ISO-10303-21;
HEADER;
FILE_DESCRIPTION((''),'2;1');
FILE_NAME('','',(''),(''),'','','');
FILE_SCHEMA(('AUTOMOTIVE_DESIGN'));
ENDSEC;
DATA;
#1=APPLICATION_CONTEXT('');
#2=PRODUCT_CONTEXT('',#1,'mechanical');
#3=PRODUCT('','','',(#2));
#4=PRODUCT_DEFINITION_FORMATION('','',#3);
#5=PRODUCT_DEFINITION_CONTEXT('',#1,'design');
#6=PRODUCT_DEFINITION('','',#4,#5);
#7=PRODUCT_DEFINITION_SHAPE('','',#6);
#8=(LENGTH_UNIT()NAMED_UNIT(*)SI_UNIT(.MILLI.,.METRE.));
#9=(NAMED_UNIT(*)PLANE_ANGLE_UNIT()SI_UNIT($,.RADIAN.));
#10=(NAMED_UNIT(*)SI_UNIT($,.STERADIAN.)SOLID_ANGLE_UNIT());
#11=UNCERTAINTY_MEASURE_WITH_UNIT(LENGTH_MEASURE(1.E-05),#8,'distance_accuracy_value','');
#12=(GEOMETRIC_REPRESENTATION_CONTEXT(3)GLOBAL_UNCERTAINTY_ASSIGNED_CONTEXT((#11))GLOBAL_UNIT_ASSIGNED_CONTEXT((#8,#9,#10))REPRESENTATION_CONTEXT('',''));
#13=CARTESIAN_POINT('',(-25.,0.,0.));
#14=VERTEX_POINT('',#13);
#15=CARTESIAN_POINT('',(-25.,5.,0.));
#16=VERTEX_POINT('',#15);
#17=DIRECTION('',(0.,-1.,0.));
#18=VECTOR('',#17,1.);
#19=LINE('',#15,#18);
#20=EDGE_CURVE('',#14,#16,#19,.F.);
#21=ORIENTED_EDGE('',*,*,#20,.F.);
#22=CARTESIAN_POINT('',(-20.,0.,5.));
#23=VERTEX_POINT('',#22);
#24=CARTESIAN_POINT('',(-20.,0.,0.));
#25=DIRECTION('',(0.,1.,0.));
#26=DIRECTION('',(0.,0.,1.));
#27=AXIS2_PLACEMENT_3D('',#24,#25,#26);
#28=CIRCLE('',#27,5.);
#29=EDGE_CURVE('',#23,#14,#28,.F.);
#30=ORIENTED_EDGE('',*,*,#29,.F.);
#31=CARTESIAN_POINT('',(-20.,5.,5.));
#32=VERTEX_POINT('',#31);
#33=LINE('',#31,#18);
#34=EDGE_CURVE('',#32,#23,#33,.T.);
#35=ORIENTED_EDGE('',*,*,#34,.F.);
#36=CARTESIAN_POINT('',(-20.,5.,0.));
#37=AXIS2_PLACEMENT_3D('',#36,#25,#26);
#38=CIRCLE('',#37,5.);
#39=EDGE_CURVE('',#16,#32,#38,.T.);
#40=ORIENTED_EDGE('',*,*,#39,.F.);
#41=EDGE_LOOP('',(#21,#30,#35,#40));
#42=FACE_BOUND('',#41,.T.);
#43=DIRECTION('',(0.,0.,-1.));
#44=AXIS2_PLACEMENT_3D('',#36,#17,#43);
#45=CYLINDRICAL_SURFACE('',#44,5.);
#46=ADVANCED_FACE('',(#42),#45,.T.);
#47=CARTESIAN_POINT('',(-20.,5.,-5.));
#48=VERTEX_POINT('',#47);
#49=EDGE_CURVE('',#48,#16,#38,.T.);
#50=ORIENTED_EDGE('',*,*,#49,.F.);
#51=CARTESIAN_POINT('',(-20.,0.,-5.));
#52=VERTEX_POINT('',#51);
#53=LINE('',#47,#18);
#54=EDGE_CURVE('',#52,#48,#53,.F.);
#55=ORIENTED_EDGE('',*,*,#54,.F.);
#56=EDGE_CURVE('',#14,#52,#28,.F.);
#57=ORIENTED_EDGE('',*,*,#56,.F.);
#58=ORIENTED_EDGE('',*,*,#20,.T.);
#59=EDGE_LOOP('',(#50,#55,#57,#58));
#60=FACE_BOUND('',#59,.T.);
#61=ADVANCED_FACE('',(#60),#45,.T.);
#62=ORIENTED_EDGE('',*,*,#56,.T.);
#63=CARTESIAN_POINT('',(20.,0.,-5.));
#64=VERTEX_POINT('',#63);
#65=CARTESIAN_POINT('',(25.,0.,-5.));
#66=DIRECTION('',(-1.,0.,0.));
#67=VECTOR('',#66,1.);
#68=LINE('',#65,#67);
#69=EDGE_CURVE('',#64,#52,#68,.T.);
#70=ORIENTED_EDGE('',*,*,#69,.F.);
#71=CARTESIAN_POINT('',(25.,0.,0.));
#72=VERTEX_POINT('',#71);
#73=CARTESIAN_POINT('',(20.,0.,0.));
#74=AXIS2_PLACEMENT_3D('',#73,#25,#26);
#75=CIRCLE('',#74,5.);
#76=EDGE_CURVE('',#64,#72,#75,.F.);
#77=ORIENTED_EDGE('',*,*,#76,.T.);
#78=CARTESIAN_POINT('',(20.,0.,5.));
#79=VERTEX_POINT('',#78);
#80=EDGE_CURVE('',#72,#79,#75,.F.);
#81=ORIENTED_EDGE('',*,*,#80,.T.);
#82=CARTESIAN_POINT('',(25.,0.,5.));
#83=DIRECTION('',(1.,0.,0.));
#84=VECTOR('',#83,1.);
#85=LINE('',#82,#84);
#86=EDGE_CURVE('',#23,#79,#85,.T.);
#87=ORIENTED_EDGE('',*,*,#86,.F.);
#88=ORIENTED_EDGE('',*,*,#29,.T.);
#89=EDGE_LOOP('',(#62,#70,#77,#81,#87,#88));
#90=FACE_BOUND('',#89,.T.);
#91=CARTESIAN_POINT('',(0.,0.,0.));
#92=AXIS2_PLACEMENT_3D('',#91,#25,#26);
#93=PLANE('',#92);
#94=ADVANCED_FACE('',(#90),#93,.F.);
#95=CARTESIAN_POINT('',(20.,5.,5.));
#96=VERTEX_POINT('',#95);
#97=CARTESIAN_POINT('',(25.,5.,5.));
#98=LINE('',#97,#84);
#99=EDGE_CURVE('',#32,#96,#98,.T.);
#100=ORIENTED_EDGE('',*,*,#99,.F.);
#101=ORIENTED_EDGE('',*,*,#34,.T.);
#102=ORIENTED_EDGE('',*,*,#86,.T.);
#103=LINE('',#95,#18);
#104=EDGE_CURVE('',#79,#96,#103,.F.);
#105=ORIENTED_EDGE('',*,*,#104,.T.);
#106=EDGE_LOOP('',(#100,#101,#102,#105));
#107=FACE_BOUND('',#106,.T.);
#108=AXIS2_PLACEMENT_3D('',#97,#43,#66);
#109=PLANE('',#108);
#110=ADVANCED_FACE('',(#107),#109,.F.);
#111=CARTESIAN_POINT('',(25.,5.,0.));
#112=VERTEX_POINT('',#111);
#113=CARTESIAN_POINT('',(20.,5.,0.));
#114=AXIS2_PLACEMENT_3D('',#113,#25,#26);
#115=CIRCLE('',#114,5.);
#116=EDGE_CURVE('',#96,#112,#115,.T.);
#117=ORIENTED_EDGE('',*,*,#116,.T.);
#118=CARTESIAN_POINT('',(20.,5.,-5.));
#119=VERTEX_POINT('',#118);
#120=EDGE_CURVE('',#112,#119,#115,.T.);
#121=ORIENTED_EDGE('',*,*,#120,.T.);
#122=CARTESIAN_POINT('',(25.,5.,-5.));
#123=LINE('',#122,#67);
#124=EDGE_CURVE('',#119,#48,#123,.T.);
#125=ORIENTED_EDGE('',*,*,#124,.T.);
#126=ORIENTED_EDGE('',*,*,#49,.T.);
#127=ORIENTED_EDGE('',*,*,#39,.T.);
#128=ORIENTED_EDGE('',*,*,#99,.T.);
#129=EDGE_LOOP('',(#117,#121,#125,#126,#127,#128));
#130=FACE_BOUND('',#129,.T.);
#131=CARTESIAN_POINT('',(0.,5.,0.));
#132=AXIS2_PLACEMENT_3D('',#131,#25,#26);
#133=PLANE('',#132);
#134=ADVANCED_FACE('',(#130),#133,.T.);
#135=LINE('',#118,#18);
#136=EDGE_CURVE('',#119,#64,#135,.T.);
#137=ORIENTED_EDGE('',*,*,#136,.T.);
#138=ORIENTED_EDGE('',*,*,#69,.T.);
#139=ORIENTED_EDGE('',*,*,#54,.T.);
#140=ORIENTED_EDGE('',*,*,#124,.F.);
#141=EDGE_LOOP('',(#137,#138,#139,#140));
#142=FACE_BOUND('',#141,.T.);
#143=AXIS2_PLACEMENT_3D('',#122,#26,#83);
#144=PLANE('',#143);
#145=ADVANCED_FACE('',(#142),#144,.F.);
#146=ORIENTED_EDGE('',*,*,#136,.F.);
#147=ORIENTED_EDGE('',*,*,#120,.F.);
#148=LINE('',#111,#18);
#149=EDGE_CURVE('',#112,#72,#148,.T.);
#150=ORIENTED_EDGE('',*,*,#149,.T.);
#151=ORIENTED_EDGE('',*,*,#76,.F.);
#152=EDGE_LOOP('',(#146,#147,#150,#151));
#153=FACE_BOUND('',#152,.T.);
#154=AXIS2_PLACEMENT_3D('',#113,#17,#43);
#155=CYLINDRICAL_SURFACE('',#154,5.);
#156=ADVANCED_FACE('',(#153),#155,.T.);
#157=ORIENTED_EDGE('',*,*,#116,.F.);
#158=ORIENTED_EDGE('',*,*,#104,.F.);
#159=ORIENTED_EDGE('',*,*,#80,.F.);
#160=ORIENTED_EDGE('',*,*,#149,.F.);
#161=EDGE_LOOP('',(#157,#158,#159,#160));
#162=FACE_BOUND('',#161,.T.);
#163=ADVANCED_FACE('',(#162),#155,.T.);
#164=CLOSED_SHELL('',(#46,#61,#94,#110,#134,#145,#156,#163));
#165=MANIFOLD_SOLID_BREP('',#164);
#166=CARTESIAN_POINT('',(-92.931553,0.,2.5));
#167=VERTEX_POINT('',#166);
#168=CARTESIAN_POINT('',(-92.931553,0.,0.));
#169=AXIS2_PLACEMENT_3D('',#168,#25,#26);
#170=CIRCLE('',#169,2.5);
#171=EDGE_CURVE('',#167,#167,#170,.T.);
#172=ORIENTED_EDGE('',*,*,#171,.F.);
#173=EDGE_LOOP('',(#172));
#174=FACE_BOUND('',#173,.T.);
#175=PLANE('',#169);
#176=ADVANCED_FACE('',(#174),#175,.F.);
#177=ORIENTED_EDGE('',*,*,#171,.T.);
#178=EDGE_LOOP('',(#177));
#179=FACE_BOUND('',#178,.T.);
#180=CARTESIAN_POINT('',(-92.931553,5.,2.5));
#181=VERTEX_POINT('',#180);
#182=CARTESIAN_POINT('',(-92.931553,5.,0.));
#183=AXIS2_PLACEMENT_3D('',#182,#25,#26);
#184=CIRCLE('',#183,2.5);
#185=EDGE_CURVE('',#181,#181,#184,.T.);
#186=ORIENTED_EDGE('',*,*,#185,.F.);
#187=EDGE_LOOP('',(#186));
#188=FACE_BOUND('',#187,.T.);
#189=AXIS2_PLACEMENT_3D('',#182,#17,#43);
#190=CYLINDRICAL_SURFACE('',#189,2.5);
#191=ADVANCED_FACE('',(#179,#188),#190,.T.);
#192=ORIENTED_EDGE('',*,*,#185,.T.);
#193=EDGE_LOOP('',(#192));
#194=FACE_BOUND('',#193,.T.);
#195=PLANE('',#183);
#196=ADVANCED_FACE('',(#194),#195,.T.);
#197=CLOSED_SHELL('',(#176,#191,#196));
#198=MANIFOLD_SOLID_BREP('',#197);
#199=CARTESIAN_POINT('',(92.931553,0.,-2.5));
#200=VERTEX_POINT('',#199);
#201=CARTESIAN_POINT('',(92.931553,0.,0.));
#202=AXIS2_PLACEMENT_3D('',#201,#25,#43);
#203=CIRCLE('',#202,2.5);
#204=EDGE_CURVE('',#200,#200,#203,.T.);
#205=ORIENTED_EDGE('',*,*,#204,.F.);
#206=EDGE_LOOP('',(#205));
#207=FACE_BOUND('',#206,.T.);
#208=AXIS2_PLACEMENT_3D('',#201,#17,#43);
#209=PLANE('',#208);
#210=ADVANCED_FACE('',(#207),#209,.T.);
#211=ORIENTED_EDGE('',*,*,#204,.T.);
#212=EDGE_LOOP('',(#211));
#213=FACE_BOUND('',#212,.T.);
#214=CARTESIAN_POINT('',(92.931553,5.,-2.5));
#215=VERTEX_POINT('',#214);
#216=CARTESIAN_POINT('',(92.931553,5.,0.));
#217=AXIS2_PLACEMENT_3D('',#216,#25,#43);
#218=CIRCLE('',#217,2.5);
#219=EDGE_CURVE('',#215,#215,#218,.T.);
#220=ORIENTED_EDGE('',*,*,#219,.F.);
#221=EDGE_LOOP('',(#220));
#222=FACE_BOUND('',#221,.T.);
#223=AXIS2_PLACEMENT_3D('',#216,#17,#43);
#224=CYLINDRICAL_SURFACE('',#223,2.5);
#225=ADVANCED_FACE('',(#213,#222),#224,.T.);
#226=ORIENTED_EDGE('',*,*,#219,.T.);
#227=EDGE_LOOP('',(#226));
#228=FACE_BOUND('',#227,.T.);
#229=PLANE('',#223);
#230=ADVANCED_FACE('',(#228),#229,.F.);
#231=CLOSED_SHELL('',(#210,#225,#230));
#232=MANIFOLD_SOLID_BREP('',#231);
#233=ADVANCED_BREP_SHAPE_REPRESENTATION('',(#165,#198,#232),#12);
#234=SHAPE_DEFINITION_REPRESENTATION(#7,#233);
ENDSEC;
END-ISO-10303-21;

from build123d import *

# Parameters (mm, degrees)
SKETCH1_R             = 2.5
BOSS_EXTRUDE1_DEPTH   = 5
BOSS_EXTRUDE1_2_DEPTH = 5
SKETCH1_W             = 50
SKETCH1_H             = 10
BOSS_EXTRUDE1_3_DEPTH = 5
FILLET1_R             = 5


with BuildPart() as part:
    # Sketch1 → Boss-Extrude1 (new body)
    with BuildSketch(Plane(origin=(0, 0, 0), x_dir=(1, 0, 0), z_dir=(0, 1, 0))):
        with Locations(Location((-92.931552942, 0, 0), (0, 0, 270))):
            Circle(SKETCH1_R)
    extrude(amount=BOSS_EXTRUDE1_DEPTH)


with BuildPart() as body_2:
    # Sketch1 → Boss-Extrude1 2 (new body)
    with BuildSketch(Plane(origin=(0, 0, 0), x_dir=(1, 0, 0), z_dir=(0, 1, 0))):
        with Locations(Location((92.931552942, 0, 0), (0, 0, 90))):
            Circle(SKETCH1_R)
    extrude(amount=BOSS_EXTRUDE1_2_DEPTH)


with BuildPart() as body_3:
    # Sketch1 → Boss-Extrude1 3 (new body)
    with BuildSketch(Plane(origin=(0, 0, 0), x_dir=(1, 0, 0), z_dir=(0, 1, 0))):
        Rectangle(SKETCH1_W, SKETCH1_H)
    extrude(amount=BOSS_EXTRUDE1_3_DEPTH)

    # Fillet1
    fillet1_edges = [body_3.edges().sort_by_distance(p)[0] for p in [
        (-25, 2.5, -5),
        (25, 2.5, -5),
        (25, 2.5, 5),
        (-25, 2.5, 5),
    ]]
    fillet(fillet1_edges, radius=FILLET1_R - 0.0001)  # a hair under: the kernel refuses the full size


solid = Compound([part.part, body_2.part, body_3.part])
